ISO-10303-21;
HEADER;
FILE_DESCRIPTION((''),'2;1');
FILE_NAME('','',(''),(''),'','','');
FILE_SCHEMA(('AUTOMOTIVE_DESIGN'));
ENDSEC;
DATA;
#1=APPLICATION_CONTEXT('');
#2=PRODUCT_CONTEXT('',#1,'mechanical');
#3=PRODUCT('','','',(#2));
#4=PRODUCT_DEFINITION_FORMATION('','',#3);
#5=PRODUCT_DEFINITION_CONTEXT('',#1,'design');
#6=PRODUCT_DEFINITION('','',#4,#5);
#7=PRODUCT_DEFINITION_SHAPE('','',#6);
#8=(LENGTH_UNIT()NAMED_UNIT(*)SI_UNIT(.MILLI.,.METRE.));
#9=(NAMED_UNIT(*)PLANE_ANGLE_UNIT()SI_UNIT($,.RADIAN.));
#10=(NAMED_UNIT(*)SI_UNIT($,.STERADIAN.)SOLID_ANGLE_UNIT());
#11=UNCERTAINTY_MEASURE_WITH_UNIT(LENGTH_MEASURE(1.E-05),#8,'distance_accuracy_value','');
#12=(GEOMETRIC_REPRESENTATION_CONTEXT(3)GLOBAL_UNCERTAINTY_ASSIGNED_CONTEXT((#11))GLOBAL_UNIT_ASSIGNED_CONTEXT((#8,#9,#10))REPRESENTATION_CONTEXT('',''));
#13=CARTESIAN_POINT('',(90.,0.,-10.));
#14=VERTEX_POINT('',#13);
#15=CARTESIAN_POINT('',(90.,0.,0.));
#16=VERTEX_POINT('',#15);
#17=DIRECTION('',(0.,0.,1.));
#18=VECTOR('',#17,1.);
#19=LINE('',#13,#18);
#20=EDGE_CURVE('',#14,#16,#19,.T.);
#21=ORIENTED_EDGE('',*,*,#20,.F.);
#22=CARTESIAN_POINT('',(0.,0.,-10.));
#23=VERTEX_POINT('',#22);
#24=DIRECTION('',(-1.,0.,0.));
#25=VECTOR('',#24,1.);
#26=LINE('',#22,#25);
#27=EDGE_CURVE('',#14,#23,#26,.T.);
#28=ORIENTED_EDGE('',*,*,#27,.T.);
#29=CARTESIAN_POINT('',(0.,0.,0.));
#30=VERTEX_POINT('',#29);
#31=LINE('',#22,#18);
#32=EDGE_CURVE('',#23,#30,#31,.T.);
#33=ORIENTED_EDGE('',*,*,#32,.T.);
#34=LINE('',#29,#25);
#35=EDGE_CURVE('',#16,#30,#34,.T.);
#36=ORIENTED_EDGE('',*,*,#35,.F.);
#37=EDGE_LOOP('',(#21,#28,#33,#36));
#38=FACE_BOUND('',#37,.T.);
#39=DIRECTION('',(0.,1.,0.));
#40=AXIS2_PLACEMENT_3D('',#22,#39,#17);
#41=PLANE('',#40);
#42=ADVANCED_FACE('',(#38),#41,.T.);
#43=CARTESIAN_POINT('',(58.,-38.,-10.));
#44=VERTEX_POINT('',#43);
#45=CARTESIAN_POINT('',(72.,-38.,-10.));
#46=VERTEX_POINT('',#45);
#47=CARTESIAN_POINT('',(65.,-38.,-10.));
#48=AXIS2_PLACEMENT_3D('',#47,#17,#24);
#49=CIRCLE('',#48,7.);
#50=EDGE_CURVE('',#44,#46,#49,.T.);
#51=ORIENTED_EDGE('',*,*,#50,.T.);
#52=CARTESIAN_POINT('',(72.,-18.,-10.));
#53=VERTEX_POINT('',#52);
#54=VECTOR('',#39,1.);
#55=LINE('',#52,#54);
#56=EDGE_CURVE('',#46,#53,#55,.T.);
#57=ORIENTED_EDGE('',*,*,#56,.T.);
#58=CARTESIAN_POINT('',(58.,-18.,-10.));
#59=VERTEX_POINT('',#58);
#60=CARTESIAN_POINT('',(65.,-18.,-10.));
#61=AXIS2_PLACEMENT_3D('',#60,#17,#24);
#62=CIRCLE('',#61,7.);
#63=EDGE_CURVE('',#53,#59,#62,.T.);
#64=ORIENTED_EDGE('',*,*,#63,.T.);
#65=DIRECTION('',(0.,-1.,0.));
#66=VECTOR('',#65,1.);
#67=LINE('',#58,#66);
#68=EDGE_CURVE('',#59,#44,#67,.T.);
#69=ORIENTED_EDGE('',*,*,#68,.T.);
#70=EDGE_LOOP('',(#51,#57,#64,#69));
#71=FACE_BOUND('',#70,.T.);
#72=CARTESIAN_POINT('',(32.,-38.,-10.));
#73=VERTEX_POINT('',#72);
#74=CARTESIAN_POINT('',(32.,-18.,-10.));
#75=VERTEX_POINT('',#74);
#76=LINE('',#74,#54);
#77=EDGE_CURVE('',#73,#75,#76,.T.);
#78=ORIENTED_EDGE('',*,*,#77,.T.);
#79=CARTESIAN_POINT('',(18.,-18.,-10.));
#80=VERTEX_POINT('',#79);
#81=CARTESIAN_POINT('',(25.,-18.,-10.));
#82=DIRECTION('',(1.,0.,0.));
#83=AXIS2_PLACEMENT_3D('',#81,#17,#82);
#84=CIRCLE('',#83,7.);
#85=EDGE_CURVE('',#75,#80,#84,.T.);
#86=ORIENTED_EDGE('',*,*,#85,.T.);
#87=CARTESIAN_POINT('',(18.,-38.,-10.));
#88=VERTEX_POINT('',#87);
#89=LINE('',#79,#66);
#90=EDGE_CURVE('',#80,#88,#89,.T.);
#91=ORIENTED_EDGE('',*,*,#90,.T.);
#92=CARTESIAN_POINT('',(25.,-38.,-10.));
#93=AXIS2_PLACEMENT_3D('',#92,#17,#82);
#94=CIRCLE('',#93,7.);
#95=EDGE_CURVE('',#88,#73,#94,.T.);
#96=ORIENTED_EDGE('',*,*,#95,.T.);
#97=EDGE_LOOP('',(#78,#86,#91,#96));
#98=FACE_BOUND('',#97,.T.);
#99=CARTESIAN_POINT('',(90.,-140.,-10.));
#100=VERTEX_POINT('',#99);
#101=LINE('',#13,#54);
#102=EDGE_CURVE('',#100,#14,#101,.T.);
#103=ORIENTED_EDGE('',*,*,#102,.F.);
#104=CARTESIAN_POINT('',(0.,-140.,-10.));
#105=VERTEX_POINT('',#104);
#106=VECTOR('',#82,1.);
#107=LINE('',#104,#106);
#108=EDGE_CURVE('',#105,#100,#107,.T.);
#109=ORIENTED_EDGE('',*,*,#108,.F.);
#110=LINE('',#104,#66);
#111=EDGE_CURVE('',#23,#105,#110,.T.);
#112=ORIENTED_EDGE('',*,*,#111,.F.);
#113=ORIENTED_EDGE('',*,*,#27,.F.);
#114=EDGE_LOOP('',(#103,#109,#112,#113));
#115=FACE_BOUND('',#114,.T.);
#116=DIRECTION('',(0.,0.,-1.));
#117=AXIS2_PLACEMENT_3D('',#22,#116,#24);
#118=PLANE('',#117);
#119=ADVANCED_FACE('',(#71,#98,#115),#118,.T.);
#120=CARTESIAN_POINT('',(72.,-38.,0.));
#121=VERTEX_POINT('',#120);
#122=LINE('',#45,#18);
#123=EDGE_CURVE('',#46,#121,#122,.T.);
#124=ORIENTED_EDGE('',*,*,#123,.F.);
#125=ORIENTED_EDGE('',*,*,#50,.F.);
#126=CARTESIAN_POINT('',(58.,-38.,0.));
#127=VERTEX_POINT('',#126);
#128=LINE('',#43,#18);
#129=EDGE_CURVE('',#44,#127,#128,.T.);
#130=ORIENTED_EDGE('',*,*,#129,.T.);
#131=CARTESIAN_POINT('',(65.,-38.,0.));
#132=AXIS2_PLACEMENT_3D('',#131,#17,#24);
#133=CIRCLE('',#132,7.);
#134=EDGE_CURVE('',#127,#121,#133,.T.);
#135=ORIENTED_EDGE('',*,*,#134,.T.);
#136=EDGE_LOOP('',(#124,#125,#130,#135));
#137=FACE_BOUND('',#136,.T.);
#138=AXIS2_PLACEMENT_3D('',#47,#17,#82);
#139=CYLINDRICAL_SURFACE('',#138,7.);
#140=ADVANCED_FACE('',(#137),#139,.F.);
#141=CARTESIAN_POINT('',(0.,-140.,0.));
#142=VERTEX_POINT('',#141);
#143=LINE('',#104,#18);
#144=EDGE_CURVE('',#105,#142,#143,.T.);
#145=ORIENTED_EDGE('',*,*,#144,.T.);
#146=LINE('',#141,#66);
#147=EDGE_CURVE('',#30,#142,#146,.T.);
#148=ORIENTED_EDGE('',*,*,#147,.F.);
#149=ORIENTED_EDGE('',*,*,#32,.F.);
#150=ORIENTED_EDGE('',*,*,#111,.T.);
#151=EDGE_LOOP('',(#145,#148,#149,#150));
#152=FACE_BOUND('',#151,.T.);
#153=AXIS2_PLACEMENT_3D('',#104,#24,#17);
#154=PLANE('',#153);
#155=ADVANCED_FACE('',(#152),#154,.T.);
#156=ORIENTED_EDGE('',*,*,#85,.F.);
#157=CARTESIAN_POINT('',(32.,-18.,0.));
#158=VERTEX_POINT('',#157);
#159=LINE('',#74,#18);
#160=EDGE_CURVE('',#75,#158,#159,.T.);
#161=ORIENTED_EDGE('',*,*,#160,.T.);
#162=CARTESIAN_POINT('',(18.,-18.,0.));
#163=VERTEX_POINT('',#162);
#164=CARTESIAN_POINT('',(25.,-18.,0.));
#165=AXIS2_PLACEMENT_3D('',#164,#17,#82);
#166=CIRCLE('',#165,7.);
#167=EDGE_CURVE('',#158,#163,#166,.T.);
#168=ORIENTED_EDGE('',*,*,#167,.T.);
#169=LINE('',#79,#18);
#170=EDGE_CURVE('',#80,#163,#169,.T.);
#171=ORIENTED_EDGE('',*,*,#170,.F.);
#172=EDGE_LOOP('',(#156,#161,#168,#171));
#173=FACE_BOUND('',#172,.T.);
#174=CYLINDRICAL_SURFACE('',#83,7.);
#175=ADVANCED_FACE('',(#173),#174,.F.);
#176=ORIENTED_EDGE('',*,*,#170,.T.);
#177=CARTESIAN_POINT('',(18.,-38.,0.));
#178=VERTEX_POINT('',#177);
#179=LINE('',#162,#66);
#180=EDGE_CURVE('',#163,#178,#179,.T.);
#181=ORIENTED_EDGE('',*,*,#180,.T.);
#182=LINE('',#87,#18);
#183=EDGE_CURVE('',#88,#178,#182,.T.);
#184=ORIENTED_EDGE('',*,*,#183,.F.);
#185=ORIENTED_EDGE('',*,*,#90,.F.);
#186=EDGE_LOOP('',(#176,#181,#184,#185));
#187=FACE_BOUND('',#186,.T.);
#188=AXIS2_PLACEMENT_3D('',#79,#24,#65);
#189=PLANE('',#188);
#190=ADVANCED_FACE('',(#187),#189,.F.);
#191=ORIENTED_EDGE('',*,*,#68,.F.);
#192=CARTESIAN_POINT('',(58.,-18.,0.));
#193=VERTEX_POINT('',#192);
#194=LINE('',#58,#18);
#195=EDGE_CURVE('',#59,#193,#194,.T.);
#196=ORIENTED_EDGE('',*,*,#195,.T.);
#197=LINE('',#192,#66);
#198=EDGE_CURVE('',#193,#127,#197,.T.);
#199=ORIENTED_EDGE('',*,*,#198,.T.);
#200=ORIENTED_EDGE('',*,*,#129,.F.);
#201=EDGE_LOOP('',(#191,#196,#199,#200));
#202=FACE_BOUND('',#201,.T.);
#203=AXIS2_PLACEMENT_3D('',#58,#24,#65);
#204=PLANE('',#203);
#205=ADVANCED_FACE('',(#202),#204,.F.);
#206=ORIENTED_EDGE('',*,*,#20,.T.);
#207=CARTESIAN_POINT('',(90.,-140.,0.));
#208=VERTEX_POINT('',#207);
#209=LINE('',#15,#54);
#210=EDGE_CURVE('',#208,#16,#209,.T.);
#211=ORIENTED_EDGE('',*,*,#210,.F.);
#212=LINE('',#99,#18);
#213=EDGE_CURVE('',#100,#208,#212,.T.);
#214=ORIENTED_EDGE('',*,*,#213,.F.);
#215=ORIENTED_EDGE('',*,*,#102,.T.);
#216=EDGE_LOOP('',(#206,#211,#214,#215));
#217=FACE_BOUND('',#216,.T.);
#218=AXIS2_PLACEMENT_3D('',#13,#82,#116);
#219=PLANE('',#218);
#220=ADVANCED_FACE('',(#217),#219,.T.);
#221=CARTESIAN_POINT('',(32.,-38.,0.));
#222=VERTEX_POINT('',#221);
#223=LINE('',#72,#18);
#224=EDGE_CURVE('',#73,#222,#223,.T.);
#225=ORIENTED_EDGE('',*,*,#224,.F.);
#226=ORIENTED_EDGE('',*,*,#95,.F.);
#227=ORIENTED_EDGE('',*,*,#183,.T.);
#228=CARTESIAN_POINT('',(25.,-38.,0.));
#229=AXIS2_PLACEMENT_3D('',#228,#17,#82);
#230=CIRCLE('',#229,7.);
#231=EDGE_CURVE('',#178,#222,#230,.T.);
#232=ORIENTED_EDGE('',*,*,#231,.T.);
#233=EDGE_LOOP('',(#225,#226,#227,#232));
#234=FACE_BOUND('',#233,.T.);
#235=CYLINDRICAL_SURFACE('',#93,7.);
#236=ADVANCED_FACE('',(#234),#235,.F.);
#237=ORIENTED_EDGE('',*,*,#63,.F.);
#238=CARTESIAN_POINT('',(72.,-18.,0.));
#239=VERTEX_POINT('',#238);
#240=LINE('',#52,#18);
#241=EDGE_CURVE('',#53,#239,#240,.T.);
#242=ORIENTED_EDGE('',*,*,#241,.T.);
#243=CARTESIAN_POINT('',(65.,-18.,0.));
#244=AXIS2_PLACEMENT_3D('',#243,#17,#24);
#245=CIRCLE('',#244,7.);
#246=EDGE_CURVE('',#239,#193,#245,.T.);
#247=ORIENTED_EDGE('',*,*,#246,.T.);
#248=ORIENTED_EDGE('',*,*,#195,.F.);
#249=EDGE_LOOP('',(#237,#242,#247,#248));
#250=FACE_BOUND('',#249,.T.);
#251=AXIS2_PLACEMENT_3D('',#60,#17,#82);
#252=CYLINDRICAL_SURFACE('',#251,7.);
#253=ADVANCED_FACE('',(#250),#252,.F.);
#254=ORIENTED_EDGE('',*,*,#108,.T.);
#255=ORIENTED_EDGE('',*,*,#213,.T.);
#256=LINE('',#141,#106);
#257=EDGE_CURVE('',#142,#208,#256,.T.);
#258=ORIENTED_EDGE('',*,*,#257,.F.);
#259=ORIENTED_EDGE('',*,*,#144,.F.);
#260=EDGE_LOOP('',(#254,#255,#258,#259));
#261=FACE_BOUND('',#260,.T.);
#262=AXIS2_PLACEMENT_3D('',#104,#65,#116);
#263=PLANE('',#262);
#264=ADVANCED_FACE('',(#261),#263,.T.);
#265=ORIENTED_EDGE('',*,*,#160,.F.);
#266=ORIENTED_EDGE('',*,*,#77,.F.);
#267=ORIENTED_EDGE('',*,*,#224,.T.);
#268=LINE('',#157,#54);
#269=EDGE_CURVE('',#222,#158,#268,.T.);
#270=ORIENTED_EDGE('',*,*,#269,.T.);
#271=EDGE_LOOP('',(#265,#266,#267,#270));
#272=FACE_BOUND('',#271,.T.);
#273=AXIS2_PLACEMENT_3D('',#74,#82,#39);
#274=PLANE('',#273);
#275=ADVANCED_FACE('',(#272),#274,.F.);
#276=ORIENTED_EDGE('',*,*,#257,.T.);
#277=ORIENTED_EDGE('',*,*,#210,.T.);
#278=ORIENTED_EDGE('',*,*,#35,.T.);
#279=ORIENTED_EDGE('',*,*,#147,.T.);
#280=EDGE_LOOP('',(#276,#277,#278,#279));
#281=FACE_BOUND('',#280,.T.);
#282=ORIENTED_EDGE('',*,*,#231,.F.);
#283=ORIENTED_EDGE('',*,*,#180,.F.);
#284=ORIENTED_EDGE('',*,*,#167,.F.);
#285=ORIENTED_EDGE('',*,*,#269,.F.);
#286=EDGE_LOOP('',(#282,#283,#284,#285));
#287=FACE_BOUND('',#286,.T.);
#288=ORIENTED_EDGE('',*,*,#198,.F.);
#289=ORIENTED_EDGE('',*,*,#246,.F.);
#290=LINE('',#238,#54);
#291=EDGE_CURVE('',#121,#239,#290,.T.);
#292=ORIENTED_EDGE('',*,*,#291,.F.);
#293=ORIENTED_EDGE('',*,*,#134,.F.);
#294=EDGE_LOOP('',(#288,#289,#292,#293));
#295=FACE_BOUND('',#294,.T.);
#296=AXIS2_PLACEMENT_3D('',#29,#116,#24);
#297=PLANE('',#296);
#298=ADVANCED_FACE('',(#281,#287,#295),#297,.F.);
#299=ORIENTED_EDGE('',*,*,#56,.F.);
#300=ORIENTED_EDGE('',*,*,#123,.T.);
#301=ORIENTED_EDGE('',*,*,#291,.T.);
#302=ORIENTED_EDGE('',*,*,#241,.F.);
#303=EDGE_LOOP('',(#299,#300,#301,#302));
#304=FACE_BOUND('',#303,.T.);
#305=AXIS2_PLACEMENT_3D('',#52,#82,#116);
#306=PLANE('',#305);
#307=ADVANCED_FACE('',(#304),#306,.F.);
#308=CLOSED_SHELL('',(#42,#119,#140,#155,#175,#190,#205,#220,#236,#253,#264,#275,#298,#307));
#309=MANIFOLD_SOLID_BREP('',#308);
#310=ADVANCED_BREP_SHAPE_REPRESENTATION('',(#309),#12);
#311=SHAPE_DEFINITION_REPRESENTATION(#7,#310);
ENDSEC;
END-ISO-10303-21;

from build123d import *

# Parameters (mm, degrees)
SKETCH_1_W             = 90
SKETCH_1_H             = 140
SM_BASE_FLANGE_1_DEPTH = 10


# Sheet-metal steps are written as plain solids
with BuildPart() as part:
    # Sketch 1 → Базовая кромка1 (new body)
    with BuildSketch(Plane.XY):
        with Locations((45, -70)):
            Rectangle(SKETCH_1_W, SKETCH_1_H)
        with BuildLine():
            Line((32, -18), (32, -38))
            ThreePointArc((32, -38), (25, -45), (18, -38))
            Line((18, -38), (18, -18))
            ThreePointArc((18, -18), (25, -11), (32, -18))
        make_face(mode=Mode.SUBTRACT)
        with BuildLine():
            Line((58, -18), (58, -38))
            ThreePointArc((58, -38), (65, -45), (72, -38))
            Line((72, -38), (72, -18))
            ThreePointArc((72, -18), (65, -11), (58, -18))
        make_face(mode=Mode.SUBTRACT)
    extrude(amount=-SM_BASE_FLANGE_1_DEPTH)


solid = part.part
